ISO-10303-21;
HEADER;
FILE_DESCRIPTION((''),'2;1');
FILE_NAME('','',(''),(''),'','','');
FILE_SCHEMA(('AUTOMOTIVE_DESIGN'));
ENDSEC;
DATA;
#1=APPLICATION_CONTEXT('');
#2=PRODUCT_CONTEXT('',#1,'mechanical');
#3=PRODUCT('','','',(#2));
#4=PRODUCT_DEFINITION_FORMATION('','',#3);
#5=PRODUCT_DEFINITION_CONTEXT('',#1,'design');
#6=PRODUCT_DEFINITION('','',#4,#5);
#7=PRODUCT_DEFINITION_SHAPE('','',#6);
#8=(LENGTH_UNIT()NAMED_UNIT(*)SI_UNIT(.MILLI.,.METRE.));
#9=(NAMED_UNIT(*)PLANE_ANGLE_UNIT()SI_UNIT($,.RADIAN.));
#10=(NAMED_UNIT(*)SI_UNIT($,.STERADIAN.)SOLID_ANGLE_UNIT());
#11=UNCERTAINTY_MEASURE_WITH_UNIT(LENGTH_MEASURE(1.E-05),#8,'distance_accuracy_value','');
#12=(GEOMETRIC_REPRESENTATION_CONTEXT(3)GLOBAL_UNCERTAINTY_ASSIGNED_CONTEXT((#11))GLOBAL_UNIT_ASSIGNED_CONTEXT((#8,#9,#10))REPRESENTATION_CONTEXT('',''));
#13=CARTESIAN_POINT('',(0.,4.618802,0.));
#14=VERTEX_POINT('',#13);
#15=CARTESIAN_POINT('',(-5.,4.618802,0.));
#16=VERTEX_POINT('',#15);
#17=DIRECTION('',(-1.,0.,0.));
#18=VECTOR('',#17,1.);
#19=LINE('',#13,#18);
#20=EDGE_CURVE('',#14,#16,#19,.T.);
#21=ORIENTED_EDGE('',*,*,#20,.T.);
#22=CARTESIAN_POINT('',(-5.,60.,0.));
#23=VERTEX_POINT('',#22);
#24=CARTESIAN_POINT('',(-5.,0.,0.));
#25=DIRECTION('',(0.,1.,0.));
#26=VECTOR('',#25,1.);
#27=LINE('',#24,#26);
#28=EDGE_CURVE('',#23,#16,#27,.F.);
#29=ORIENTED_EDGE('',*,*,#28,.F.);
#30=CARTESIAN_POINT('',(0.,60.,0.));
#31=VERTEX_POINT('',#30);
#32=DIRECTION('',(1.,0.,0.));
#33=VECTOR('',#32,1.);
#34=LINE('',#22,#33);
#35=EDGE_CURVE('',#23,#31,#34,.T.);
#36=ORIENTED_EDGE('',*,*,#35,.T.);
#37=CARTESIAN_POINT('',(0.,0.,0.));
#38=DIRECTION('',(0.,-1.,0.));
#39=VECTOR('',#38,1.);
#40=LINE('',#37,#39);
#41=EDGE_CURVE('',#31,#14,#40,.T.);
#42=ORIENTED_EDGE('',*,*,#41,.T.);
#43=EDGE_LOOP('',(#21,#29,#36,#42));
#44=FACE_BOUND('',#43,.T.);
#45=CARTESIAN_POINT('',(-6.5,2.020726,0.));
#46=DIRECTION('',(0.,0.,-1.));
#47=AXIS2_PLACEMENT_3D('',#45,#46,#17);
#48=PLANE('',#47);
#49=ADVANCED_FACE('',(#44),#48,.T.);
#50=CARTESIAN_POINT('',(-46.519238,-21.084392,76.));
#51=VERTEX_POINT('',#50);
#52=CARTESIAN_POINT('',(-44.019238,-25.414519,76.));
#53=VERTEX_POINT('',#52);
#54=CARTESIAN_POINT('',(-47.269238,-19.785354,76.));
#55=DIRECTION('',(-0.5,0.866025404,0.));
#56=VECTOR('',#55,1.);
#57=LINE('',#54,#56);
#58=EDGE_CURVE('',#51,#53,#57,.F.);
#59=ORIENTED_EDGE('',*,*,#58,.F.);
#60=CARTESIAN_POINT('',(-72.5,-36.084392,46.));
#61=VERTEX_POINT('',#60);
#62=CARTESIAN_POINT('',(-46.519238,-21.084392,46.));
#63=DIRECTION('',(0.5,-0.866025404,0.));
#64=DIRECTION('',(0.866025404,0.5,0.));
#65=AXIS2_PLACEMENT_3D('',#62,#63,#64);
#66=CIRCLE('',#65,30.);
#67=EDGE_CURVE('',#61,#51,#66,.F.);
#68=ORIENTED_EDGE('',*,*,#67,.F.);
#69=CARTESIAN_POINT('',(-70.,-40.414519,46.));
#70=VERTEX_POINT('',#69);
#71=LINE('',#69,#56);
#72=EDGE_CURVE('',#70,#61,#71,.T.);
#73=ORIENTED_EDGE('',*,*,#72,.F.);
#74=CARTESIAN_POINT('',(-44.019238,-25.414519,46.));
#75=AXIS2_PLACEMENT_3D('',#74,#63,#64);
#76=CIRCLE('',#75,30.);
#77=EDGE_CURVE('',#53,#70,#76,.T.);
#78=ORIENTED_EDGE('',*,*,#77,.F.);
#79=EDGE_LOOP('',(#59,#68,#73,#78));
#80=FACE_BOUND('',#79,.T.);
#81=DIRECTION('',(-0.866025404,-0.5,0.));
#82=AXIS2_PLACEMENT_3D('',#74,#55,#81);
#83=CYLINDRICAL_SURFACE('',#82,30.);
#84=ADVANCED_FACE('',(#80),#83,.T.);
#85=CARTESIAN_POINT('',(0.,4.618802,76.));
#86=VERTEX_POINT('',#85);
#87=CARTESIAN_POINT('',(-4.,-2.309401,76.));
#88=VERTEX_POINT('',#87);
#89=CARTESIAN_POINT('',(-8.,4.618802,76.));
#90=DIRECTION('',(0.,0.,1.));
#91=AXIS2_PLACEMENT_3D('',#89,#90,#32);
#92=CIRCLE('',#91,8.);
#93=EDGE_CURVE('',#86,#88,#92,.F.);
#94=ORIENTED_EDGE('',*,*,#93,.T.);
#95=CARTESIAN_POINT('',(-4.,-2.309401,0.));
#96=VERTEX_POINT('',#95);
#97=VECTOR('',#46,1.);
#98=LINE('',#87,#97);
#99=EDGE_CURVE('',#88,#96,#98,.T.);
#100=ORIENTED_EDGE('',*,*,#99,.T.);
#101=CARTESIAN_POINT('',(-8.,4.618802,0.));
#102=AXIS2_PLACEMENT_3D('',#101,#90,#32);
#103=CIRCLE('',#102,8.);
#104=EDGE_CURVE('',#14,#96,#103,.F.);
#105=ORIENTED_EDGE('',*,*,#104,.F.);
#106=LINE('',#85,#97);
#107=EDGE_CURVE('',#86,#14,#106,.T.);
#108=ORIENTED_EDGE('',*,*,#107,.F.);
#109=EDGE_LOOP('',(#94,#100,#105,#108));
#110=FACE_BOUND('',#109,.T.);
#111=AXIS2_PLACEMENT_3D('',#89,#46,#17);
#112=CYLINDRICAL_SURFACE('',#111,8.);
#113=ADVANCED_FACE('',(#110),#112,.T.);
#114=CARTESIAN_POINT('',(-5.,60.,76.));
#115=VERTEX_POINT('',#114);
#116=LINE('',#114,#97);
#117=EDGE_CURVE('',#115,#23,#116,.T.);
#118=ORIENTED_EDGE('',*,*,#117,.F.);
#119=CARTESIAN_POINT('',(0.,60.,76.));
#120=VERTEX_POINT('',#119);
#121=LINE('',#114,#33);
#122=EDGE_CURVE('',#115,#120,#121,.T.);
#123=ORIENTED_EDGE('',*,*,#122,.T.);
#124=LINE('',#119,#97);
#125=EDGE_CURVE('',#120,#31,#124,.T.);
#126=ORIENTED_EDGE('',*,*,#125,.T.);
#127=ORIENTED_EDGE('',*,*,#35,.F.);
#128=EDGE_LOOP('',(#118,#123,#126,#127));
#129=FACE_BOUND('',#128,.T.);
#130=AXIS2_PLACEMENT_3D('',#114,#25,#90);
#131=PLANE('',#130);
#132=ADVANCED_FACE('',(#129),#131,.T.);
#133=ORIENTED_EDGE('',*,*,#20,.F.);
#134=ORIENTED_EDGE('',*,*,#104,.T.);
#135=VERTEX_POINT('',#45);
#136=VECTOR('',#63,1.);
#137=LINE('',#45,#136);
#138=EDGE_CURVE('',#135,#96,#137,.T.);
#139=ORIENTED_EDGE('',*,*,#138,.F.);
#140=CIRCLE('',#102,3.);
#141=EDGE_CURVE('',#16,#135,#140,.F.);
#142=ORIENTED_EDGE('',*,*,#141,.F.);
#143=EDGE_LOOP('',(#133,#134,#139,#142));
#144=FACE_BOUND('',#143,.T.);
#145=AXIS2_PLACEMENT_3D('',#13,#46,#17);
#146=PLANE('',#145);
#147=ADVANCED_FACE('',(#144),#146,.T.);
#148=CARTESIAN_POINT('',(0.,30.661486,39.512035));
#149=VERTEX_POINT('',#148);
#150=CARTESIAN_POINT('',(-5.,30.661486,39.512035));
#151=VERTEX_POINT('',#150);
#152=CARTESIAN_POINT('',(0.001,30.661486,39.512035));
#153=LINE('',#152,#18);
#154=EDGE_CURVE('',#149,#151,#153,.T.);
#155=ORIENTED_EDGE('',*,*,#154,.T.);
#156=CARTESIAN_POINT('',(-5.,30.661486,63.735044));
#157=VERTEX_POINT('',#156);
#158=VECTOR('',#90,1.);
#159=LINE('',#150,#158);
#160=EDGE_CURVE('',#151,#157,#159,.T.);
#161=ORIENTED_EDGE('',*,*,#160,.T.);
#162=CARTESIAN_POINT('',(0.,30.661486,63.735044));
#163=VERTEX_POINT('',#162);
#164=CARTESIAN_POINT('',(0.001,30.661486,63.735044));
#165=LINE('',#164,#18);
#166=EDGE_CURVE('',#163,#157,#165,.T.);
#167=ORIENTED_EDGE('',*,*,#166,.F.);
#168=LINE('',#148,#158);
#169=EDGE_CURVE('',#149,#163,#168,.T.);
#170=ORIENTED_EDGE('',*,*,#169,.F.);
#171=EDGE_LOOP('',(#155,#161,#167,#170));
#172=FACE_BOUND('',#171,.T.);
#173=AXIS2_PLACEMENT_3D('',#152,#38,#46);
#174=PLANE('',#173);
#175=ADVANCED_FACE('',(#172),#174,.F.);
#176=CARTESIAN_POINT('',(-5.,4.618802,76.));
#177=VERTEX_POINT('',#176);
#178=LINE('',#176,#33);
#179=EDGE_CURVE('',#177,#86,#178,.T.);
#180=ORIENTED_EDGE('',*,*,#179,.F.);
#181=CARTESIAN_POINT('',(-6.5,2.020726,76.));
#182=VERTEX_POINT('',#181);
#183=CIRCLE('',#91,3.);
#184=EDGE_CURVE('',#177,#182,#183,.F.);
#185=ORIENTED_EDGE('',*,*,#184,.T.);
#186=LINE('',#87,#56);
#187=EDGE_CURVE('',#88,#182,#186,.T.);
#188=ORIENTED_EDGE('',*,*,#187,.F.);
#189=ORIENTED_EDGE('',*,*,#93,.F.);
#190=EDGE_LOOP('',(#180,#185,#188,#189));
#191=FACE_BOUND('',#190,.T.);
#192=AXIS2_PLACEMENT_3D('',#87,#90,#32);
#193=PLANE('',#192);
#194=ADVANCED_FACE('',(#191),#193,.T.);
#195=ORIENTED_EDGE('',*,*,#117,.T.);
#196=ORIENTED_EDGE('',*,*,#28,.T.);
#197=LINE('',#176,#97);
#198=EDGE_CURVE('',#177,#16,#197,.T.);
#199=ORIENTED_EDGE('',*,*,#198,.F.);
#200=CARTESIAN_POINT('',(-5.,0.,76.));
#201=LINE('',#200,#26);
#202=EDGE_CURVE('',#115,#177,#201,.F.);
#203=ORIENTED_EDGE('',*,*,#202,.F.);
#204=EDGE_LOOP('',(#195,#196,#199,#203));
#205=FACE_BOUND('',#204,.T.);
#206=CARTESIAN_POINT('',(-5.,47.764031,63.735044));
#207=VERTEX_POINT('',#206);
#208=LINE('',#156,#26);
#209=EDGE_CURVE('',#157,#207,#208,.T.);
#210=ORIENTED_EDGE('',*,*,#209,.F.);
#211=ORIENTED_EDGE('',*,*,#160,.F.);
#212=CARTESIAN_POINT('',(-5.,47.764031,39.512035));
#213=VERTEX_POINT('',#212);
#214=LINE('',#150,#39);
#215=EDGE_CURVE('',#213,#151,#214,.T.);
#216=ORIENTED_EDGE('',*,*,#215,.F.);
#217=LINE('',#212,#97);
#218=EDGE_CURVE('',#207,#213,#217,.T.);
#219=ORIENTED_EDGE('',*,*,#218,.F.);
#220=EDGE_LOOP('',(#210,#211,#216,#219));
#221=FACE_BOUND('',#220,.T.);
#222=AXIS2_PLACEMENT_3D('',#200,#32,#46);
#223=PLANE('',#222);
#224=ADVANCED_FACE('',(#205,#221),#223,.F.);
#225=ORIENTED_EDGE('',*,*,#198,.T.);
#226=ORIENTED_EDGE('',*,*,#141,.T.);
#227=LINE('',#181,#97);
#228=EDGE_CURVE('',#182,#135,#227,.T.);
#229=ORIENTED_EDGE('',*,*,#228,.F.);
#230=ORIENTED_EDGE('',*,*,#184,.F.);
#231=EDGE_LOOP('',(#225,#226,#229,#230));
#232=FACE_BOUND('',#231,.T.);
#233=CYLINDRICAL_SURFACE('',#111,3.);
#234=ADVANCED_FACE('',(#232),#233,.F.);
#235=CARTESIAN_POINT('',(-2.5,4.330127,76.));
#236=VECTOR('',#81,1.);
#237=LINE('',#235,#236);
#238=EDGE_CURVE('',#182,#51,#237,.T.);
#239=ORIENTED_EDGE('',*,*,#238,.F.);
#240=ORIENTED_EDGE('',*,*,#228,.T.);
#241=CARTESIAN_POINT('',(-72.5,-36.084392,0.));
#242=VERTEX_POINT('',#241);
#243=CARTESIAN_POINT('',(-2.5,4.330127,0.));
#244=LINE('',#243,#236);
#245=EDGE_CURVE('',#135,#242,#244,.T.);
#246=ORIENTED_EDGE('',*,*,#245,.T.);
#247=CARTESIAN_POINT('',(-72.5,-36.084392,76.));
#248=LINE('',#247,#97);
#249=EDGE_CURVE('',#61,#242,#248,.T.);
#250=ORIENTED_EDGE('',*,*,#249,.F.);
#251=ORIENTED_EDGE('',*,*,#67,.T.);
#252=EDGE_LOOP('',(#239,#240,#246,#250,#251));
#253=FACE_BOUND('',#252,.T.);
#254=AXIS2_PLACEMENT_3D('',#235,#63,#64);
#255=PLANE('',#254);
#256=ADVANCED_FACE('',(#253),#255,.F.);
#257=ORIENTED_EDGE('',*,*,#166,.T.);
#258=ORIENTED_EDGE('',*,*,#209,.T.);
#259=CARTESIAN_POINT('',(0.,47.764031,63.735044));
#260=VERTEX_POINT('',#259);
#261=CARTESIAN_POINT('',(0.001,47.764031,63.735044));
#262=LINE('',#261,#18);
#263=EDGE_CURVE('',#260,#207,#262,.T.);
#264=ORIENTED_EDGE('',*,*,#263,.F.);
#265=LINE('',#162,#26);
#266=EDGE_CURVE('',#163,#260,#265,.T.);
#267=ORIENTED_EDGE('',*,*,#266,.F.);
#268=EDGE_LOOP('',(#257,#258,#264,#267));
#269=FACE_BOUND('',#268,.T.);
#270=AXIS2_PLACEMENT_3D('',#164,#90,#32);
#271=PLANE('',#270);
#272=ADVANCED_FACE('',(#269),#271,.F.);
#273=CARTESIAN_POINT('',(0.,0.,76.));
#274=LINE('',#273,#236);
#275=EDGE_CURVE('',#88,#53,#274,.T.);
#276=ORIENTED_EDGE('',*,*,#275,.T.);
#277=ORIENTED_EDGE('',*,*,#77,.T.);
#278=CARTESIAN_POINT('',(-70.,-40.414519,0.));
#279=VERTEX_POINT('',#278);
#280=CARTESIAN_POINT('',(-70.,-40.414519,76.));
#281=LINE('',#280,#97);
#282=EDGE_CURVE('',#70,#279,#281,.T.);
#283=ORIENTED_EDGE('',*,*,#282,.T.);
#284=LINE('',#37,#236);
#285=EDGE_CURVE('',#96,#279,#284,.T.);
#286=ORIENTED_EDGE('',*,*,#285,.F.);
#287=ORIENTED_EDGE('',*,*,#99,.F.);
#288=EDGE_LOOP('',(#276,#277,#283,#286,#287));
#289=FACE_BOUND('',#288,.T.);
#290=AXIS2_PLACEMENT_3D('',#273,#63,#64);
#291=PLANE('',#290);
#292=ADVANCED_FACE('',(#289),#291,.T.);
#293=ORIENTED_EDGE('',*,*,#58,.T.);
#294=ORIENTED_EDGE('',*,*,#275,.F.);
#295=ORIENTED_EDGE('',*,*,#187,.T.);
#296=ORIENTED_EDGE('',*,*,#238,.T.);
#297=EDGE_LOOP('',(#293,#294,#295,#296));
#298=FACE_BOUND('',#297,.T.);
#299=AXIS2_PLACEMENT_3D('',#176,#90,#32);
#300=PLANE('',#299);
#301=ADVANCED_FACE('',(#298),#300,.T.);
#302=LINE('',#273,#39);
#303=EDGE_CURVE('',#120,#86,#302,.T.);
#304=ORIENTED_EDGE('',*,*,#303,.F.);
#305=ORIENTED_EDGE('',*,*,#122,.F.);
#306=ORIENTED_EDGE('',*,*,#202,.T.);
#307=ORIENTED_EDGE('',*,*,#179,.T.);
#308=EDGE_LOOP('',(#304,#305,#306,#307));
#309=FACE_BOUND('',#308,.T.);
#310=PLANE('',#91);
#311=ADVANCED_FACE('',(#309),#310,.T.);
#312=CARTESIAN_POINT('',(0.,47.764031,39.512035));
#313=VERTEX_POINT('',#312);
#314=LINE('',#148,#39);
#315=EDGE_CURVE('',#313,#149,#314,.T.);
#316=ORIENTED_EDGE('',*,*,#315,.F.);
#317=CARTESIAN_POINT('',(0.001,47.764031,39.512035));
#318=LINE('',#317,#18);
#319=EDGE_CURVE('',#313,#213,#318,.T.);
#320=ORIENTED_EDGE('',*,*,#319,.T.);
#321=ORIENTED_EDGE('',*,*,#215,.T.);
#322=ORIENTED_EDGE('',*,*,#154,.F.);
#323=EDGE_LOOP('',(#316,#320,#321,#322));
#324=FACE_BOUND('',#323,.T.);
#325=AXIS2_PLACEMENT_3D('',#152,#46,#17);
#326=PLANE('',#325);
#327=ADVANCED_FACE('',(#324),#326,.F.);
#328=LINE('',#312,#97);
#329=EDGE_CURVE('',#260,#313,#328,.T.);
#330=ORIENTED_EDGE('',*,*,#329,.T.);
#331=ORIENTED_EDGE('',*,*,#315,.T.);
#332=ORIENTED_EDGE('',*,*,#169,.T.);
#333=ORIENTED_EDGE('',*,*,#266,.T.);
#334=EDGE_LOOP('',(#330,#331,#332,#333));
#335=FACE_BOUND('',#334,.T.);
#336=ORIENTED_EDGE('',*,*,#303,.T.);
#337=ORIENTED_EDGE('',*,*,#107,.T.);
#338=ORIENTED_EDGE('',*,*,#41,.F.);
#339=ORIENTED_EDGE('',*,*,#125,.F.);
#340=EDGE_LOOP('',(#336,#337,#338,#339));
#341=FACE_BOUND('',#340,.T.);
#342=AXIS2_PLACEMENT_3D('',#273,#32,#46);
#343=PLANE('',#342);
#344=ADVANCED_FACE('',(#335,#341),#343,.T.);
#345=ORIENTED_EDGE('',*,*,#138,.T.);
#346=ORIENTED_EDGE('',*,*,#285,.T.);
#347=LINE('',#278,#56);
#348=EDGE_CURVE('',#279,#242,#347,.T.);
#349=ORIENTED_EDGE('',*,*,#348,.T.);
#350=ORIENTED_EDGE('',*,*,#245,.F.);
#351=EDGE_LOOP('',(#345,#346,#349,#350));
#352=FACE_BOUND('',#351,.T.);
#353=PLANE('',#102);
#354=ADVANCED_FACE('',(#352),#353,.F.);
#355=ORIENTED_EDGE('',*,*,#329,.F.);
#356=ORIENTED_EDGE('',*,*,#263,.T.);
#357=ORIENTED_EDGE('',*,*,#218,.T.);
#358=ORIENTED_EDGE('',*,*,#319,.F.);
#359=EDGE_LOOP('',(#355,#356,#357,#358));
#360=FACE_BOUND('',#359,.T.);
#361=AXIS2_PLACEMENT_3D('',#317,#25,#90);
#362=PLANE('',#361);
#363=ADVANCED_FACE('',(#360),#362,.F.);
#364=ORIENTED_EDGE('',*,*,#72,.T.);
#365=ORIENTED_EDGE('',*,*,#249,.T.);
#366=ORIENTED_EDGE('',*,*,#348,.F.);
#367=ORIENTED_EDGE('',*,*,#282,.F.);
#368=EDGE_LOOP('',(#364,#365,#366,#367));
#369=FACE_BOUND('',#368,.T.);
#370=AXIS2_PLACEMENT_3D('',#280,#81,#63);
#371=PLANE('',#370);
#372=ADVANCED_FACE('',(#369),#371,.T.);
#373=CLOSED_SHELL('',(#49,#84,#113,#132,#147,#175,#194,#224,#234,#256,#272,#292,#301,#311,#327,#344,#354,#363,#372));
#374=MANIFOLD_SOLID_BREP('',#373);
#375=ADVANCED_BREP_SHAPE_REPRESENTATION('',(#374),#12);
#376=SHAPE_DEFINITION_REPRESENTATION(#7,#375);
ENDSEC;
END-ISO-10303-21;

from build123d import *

# Parameters (mm, degrees)
ODGI_CIE_BAZOWE1_DEPTH     = 76
ZAOKR_GLENIE1_R            = 30
WYTNIJ_WYCI_GNI_CIE1_REACH = 120.035
SZKIC2_W                   = 24.223008457
SZKIC2_H                   = 17.102544726


# Sheet-metal steps are written as plain solids
with BuildPart() as part:
    # Szkic1 → Odgięcie bazowe1 (new body)
    with BuildSketch(Plane.XY):
        with BuildLine():
            Line((-70, -40.414518843), (-4, -2.309401077))
            ThreePointArc((-4, -2.309401077), (-1.07179677, 0.618802154), (0, 4.618802154))
            Line((0, 4.618802154), (0, 60))
            Line((0, 60), (-5, 60))
            Line((-5, 60), (-5, 4.618802154))
            ThreePointArc((-5, 4.618802154), (-5.401923789, 3.118802154), (-6.5, 2.020725942))
            Line((-6.5, 2.020725942), (-72.5, -36.084391824))
            Line((-72.5, -36.084391824), (-70, -40.414518843))
        make_face()
    extrude(amount=ODGI_CIE_BAZOWE1_DEPTH)

    # Zaokrąglenie1
    zaokr_glenie1_edges = [part.edges().sort_by_distance(p)[0] for p in [
        (-71.25, -38.249455334, 76),
    ]]
    fillet(zaokr_glenie1_edges, radius=ZAOKR_GLENIE1_R)

    # Szkic2 → Wytnij-wyciągnięcie1 (cut, up to next)
    with BuildSketch(Plane.ZY.offset(5), mode=Mode.PRIVATE) as wytnij_wyci_gni_cie1_sk1:
        with Locations((51.623539351, 39.212758495)):
            Rectangle(SZKIC2_W, SZKIC2_H)
    wytnij_wyci_gni_cie1_tool1 = extrude(wytnij_wyci_gni_cie1_sk1.sketch, amount=-WYTNIJ_WYCI_GNI_CIE1_REACH, mode=Mode.PRIVATE) & part.part
    add(wytnij_wyci_gni_cie1_tool1.solids().sort_by_distance((-5, 39.212758, 51.623539))[0], mode=Mode.SUBTRACT)


solid = part.part
